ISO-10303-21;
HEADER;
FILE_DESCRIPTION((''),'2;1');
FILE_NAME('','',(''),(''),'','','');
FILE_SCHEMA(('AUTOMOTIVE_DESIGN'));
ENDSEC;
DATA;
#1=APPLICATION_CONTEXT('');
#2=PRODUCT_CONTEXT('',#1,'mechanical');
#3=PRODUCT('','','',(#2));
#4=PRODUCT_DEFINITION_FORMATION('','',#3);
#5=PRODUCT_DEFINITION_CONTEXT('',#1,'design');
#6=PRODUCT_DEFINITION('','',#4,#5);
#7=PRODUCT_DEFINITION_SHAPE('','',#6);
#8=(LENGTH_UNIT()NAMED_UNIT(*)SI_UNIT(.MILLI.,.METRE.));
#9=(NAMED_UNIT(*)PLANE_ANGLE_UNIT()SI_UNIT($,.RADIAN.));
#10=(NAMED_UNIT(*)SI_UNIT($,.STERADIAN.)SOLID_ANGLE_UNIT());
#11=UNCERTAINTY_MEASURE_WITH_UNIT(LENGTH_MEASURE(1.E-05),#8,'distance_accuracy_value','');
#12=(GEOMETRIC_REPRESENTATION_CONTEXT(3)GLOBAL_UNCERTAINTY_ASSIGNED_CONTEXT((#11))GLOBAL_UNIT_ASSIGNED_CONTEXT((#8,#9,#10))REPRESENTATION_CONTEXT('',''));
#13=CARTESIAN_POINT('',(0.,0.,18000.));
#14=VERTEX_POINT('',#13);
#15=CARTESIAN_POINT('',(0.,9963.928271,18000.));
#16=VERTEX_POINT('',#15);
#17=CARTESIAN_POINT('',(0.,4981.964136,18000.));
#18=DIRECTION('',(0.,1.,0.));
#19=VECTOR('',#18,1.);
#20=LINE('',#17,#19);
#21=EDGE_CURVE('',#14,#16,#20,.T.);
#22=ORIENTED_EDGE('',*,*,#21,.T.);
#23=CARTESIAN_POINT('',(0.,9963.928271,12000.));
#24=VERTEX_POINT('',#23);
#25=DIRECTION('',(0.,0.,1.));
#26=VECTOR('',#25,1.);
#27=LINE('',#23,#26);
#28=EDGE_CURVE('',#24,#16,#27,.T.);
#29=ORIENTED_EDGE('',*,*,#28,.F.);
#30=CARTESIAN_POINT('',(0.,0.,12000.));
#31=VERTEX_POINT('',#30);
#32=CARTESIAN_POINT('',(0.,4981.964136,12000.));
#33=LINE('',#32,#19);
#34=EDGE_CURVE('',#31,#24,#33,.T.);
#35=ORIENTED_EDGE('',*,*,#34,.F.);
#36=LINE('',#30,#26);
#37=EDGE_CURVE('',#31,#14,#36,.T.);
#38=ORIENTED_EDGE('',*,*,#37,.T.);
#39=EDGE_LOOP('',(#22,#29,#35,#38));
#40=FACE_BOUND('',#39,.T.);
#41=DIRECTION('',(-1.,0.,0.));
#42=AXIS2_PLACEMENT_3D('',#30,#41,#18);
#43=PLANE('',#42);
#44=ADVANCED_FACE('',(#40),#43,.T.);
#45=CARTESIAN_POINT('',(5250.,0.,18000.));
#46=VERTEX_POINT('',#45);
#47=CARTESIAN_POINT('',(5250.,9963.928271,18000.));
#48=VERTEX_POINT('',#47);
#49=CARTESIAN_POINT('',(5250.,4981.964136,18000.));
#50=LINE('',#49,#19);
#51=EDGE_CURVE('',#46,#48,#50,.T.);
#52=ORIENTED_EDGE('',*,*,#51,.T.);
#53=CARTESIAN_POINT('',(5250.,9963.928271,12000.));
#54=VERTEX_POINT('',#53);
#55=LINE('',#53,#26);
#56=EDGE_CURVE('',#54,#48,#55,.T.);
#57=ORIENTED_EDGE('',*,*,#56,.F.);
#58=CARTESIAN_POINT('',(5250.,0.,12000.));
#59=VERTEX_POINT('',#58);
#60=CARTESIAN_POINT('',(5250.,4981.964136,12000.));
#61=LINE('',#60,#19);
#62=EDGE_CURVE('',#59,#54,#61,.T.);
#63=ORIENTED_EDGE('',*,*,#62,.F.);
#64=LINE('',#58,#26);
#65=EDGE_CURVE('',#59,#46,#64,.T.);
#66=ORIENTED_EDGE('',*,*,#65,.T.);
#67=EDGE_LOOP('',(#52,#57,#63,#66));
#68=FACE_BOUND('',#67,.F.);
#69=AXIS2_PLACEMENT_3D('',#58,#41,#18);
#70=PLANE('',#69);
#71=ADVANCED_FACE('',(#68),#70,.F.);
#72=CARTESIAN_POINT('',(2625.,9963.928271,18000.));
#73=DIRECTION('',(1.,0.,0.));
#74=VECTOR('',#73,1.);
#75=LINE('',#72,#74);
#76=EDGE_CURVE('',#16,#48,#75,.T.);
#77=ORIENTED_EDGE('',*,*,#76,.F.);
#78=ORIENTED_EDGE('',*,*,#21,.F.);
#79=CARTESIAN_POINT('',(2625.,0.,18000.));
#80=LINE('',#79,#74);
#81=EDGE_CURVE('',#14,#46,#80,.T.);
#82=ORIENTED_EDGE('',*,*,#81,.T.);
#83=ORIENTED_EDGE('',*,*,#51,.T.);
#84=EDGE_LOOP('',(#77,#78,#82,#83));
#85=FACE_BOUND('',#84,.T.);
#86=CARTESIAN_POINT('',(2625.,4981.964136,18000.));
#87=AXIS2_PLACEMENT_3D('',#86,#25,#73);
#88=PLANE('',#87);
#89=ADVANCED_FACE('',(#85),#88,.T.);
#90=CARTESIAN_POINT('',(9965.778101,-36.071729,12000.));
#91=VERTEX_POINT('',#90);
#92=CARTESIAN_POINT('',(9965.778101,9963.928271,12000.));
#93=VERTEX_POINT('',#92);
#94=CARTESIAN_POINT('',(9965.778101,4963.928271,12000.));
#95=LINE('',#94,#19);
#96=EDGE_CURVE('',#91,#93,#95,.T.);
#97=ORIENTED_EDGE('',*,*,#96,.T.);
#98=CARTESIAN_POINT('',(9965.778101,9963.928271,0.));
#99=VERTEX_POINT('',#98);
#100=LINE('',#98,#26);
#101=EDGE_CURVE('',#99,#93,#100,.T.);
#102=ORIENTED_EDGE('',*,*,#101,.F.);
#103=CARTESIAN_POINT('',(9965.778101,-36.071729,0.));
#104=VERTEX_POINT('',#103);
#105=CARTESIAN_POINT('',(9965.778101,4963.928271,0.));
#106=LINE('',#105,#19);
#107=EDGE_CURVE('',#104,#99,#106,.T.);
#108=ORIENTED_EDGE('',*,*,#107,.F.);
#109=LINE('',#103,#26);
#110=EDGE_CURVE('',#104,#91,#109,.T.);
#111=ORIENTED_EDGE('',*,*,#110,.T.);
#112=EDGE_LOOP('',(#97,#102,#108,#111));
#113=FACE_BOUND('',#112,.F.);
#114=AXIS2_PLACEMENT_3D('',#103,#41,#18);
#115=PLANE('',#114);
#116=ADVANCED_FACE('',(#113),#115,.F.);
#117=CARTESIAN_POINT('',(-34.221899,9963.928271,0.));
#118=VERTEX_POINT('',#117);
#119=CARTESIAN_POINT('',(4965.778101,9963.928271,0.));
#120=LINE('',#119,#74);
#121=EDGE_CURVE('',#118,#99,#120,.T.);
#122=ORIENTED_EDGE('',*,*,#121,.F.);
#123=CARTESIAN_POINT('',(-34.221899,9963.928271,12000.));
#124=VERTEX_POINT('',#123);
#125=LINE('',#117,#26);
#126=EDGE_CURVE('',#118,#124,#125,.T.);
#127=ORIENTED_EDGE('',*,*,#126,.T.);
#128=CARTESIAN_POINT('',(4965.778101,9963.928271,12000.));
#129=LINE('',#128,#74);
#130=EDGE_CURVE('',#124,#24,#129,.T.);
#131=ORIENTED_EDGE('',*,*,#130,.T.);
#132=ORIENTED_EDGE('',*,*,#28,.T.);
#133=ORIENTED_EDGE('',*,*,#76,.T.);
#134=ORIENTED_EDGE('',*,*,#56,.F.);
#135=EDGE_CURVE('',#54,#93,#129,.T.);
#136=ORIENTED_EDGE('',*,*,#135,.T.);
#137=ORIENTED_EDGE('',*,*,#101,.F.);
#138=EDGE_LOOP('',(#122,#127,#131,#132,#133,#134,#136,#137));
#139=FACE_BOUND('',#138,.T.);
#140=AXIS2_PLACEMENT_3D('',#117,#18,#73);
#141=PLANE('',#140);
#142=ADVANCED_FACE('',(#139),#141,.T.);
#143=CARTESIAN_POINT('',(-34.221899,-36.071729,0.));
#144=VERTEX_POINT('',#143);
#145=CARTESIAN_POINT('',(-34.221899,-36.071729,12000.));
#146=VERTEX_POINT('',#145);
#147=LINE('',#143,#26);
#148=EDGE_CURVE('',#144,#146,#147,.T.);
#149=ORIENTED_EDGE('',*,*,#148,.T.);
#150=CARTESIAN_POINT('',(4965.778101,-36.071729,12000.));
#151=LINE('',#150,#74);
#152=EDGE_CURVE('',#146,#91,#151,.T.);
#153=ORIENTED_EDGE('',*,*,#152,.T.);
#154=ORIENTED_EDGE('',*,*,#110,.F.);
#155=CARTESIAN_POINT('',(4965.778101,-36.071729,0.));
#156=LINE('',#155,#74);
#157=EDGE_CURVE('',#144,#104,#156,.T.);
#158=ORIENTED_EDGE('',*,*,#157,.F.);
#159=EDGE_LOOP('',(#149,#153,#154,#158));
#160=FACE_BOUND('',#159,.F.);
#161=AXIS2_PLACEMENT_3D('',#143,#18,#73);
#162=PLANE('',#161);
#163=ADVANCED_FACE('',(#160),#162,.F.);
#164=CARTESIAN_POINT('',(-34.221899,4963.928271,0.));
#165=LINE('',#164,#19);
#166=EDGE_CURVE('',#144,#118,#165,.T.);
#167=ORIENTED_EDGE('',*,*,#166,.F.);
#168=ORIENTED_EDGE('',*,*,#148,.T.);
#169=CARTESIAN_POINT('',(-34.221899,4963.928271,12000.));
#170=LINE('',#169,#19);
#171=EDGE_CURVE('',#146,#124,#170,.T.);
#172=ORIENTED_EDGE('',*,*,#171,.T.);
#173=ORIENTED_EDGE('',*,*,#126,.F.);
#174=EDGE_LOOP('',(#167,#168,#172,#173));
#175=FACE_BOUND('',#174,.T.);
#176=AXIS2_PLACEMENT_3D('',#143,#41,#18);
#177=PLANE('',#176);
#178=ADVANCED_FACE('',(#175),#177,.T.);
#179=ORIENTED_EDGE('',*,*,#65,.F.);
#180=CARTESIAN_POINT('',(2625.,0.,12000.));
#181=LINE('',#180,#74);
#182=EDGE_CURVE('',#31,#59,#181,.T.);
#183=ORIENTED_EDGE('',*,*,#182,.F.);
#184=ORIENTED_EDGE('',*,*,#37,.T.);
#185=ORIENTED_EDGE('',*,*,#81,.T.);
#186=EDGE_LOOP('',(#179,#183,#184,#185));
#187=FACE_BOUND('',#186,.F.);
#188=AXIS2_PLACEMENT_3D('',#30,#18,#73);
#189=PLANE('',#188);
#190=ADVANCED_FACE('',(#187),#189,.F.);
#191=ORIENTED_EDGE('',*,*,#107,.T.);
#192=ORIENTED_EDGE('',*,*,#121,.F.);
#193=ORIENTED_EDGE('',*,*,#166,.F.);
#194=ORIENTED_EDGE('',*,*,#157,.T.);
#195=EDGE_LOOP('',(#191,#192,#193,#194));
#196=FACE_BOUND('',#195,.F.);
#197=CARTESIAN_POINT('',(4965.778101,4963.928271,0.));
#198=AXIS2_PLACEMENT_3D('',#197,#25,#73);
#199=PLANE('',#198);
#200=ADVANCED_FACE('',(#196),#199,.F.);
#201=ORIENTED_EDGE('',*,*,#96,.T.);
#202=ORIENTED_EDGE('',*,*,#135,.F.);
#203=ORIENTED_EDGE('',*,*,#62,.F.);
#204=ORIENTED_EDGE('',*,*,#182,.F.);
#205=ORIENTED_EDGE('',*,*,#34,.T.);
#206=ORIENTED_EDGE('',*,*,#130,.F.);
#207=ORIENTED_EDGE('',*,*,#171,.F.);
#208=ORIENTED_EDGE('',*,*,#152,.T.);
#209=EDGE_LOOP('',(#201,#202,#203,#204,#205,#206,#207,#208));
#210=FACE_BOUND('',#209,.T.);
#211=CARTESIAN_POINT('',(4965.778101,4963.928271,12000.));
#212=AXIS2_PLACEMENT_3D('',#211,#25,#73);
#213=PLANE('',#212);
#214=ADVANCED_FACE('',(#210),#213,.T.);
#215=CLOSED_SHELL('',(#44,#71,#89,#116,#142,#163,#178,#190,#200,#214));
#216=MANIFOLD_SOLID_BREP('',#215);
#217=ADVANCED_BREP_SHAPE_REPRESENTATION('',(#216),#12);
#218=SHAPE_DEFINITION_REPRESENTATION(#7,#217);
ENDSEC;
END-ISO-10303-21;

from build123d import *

# Parameters (mm, degrees)
F0_W     = 10000
F0_H     = 10000
F1_DEPTH = 12000
F3_W     = 5250
F3_H     = 9963.928271085
F5_DEPTH = 6000


# Not quite as in the source:
# - a feature of the source that left no trace in its solid (it failed there, or was rolled back) is left out


with BuildPart() as f1:
    # F0 (on Top) → F1 (new body)
    with BuildSketch(Plane.XY):
        with Locations((4965.7781012356, 4963.928271085)):
            Rectangle(F0_W, F0_H)
    extrude(amount=F1_DEPTH)

    # F3 (on face) → F5 (join)
    with BuildSketch(Plane.XY.offset(12000)):
        with Locations((2625, 4981.9641355425)):
            Rectangle(F3_W, F3_H)
    extrude(amount=F5_DEPTH)


solid = f1.part
